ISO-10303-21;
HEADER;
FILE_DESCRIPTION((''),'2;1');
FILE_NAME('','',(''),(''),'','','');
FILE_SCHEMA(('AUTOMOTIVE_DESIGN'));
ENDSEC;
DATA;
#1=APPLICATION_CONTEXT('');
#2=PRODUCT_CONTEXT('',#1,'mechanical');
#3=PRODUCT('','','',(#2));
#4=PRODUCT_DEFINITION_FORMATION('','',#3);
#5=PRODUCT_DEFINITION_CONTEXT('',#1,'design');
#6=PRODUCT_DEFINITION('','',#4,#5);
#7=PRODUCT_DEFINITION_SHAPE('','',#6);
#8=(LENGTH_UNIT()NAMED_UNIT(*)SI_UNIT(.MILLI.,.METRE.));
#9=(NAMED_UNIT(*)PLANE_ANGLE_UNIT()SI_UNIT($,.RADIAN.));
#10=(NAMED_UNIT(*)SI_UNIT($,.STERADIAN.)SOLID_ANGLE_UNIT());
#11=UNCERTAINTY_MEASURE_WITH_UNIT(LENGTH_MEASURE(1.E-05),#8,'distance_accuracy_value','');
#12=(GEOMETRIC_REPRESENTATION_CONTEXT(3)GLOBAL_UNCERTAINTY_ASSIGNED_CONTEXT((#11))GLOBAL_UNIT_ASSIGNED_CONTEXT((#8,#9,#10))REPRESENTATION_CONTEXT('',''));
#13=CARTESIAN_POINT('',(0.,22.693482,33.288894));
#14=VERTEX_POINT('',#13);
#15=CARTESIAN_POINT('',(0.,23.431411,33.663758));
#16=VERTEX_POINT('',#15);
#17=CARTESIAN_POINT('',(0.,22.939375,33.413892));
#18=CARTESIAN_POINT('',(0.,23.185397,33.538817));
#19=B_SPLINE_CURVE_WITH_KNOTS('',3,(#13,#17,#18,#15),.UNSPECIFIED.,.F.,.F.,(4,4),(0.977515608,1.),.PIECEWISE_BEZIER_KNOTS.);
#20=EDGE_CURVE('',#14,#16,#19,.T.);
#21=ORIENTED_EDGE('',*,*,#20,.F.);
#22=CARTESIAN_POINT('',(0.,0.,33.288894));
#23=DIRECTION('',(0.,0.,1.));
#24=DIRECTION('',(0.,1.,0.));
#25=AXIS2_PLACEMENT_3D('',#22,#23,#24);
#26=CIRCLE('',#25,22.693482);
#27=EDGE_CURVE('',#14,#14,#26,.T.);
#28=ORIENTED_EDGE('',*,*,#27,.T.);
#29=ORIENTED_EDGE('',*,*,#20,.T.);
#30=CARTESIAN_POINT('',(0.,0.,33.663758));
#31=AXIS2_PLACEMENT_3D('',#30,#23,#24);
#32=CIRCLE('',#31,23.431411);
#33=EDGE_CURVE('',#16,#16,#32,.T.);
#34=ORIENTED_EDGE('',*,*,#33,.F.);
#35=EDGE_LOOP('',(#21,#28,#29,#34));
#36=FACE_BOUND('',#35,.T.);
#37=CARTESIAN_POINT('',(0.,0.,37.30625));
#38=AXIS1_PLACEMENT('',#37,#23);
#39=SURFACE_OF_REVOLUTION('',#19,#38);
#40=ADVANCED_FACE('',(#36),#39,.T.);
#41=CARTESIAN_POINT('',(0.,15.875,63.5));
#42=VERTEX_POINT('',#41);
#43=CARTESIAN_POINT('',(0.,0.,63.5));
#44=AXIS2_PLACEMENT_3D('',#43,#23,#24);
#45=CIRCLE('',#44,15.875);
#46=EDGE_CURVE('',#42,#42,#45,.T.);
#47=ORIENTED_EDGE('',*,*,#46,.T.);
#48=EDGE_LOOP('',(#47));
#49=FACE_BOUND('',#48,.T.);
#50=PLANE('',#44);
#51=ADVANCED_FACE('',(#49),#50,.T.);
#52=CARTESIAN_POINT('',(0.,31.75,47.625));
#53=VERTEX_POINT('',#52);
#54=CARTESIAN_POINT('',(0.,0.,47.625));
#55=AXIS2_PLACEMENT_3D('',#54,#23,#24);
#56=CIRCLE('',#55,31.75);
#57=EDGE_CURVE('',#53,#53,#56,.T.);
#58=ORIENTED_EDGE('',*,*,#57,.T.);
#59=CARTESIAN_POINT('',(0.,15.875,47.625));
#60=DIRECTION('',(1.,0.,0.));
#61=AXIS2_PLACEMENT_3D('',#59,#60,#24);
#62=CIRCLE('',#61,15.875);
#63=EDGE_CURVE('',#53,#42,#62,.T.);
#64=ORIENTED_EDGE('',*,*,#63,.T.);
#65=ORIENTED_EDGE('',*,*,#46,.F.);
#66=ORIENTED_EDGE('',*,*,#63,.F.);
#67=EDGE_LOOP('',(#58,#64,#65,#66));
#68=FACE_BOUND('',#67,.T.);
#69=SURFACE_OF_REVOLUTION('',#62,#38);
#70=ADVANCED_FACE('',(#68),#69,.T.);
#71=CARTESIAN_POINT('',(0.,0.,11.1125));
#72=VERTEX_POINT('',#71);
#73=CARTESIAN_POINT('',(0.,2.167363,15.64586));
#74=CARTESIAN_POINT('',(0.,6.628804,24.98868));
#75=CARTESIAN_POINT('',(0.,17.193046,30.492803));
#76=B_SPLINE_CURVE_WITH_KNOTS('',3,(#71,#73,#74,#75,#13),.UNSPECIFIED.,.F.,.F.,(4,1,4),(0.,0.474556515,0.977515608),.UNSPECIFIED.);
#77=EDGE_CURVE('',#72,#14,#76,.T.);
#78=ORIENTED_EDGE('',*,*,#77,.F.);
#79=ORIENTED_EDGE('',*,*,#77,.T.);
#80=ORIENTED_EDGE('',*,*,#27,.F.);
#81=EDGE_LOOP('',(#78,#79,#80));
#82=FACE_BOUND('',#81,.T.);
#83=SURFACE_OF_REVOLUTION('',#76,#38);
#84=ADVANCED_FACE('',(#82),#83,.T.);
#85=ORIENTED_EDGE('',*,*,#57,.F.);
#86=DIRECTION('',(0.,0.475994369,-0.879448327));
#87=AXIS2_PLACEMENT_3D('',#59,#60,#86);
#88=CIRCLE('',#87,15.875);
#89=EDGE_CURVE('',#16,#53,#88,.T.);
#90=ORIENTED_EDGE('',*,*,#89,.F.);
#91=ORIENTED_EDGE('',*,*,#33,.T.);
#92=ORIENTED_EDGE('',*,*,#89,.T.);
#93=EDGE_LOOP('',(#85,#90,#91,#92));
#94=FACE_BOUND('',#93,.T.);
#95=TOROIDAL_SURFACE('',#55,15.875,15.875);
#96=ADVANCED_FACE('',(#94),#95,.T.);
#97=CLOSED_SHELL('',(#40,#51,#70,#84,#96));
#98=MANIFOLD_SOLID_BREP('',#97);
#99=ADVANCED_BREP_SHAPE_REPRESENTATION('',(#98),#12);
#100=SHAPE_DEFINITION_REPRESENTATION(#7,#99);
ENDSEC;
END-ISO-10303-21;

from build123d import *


with BuildPart() as f1:
    # F0 (on Right) → F1 (revolve)
    with BuildSketch(Plane.YZ):
        with BuildLine():
            ThreePointArc((23.4314106154, 33.6637578056), (29.5126985507, 39.4991890718), (31.75, 47.625))
            ThreePointArc((31.75, 47.625), (27.1003201513, 58.8503201513), (15.875, 63.5))
            ThreePointArc((15.875, 63.5), (4.6496797864, 58.8503200891), (0, 47.624999824))
            ThreePointArc((0, 47.624999824), (4.6496799109, 36.3996797864), (15.875, 31.75))
            ThreePointArc((15.875, 31.75), (19.3699927872, 32.1395019319), (22.6934824006, 33.2888944356))
            add(Edge.make_bspline(
                [(22.6934824006, 33.2888944356), (22.9393750786, 33.4138915107), (23.1853973333, 33.5388167735), (23.4314106154, 33.6637578056)],
                knots=[0.9775156082, 0.9775156082, 0.9775156082, 0.9775156082, 1, 1, 1, 1], degree=3))
        make_face()
        with BuildLine():
            ThreePointArc((0, 47.624999824), (4.6496797864, 58.8503200891), (15.875, 63.5))
            Line((15.875, 63.5), (0, 63.5))
            Line((0, 63.5), (0, 47.624999824))
        make_face()
        with BuildLine():
            ThreePointArc((15.875, 31.75), (4.6496799109, 36.3996797864), (0, 47.624999824))
            Line((0, 47.624999824), (0, 11.1125))
            add(Edge.make_bspline(
                [(0, 11.1125), (2.1673627178, 15.6458601549), (6.6288038262, 24.988679858), (17.1930463797, 30.4928029871), (22.6934824006, 33.2888944356)],
                knots=[0, 0, 0, 0, 0.4745565147, 0.9775156082, 0.9775156082, 0.9775156082, 0.9775156082], degree=3))
            ThreePointArc((22.6934824006, 33.2888944356), (19.3699927872, 32.1395019319), (15.875, 31.75))
        make_face()
    revolve(axis=Axis((0, 0, 37.30625), (0, 0, 1)))


solid = f1.part
